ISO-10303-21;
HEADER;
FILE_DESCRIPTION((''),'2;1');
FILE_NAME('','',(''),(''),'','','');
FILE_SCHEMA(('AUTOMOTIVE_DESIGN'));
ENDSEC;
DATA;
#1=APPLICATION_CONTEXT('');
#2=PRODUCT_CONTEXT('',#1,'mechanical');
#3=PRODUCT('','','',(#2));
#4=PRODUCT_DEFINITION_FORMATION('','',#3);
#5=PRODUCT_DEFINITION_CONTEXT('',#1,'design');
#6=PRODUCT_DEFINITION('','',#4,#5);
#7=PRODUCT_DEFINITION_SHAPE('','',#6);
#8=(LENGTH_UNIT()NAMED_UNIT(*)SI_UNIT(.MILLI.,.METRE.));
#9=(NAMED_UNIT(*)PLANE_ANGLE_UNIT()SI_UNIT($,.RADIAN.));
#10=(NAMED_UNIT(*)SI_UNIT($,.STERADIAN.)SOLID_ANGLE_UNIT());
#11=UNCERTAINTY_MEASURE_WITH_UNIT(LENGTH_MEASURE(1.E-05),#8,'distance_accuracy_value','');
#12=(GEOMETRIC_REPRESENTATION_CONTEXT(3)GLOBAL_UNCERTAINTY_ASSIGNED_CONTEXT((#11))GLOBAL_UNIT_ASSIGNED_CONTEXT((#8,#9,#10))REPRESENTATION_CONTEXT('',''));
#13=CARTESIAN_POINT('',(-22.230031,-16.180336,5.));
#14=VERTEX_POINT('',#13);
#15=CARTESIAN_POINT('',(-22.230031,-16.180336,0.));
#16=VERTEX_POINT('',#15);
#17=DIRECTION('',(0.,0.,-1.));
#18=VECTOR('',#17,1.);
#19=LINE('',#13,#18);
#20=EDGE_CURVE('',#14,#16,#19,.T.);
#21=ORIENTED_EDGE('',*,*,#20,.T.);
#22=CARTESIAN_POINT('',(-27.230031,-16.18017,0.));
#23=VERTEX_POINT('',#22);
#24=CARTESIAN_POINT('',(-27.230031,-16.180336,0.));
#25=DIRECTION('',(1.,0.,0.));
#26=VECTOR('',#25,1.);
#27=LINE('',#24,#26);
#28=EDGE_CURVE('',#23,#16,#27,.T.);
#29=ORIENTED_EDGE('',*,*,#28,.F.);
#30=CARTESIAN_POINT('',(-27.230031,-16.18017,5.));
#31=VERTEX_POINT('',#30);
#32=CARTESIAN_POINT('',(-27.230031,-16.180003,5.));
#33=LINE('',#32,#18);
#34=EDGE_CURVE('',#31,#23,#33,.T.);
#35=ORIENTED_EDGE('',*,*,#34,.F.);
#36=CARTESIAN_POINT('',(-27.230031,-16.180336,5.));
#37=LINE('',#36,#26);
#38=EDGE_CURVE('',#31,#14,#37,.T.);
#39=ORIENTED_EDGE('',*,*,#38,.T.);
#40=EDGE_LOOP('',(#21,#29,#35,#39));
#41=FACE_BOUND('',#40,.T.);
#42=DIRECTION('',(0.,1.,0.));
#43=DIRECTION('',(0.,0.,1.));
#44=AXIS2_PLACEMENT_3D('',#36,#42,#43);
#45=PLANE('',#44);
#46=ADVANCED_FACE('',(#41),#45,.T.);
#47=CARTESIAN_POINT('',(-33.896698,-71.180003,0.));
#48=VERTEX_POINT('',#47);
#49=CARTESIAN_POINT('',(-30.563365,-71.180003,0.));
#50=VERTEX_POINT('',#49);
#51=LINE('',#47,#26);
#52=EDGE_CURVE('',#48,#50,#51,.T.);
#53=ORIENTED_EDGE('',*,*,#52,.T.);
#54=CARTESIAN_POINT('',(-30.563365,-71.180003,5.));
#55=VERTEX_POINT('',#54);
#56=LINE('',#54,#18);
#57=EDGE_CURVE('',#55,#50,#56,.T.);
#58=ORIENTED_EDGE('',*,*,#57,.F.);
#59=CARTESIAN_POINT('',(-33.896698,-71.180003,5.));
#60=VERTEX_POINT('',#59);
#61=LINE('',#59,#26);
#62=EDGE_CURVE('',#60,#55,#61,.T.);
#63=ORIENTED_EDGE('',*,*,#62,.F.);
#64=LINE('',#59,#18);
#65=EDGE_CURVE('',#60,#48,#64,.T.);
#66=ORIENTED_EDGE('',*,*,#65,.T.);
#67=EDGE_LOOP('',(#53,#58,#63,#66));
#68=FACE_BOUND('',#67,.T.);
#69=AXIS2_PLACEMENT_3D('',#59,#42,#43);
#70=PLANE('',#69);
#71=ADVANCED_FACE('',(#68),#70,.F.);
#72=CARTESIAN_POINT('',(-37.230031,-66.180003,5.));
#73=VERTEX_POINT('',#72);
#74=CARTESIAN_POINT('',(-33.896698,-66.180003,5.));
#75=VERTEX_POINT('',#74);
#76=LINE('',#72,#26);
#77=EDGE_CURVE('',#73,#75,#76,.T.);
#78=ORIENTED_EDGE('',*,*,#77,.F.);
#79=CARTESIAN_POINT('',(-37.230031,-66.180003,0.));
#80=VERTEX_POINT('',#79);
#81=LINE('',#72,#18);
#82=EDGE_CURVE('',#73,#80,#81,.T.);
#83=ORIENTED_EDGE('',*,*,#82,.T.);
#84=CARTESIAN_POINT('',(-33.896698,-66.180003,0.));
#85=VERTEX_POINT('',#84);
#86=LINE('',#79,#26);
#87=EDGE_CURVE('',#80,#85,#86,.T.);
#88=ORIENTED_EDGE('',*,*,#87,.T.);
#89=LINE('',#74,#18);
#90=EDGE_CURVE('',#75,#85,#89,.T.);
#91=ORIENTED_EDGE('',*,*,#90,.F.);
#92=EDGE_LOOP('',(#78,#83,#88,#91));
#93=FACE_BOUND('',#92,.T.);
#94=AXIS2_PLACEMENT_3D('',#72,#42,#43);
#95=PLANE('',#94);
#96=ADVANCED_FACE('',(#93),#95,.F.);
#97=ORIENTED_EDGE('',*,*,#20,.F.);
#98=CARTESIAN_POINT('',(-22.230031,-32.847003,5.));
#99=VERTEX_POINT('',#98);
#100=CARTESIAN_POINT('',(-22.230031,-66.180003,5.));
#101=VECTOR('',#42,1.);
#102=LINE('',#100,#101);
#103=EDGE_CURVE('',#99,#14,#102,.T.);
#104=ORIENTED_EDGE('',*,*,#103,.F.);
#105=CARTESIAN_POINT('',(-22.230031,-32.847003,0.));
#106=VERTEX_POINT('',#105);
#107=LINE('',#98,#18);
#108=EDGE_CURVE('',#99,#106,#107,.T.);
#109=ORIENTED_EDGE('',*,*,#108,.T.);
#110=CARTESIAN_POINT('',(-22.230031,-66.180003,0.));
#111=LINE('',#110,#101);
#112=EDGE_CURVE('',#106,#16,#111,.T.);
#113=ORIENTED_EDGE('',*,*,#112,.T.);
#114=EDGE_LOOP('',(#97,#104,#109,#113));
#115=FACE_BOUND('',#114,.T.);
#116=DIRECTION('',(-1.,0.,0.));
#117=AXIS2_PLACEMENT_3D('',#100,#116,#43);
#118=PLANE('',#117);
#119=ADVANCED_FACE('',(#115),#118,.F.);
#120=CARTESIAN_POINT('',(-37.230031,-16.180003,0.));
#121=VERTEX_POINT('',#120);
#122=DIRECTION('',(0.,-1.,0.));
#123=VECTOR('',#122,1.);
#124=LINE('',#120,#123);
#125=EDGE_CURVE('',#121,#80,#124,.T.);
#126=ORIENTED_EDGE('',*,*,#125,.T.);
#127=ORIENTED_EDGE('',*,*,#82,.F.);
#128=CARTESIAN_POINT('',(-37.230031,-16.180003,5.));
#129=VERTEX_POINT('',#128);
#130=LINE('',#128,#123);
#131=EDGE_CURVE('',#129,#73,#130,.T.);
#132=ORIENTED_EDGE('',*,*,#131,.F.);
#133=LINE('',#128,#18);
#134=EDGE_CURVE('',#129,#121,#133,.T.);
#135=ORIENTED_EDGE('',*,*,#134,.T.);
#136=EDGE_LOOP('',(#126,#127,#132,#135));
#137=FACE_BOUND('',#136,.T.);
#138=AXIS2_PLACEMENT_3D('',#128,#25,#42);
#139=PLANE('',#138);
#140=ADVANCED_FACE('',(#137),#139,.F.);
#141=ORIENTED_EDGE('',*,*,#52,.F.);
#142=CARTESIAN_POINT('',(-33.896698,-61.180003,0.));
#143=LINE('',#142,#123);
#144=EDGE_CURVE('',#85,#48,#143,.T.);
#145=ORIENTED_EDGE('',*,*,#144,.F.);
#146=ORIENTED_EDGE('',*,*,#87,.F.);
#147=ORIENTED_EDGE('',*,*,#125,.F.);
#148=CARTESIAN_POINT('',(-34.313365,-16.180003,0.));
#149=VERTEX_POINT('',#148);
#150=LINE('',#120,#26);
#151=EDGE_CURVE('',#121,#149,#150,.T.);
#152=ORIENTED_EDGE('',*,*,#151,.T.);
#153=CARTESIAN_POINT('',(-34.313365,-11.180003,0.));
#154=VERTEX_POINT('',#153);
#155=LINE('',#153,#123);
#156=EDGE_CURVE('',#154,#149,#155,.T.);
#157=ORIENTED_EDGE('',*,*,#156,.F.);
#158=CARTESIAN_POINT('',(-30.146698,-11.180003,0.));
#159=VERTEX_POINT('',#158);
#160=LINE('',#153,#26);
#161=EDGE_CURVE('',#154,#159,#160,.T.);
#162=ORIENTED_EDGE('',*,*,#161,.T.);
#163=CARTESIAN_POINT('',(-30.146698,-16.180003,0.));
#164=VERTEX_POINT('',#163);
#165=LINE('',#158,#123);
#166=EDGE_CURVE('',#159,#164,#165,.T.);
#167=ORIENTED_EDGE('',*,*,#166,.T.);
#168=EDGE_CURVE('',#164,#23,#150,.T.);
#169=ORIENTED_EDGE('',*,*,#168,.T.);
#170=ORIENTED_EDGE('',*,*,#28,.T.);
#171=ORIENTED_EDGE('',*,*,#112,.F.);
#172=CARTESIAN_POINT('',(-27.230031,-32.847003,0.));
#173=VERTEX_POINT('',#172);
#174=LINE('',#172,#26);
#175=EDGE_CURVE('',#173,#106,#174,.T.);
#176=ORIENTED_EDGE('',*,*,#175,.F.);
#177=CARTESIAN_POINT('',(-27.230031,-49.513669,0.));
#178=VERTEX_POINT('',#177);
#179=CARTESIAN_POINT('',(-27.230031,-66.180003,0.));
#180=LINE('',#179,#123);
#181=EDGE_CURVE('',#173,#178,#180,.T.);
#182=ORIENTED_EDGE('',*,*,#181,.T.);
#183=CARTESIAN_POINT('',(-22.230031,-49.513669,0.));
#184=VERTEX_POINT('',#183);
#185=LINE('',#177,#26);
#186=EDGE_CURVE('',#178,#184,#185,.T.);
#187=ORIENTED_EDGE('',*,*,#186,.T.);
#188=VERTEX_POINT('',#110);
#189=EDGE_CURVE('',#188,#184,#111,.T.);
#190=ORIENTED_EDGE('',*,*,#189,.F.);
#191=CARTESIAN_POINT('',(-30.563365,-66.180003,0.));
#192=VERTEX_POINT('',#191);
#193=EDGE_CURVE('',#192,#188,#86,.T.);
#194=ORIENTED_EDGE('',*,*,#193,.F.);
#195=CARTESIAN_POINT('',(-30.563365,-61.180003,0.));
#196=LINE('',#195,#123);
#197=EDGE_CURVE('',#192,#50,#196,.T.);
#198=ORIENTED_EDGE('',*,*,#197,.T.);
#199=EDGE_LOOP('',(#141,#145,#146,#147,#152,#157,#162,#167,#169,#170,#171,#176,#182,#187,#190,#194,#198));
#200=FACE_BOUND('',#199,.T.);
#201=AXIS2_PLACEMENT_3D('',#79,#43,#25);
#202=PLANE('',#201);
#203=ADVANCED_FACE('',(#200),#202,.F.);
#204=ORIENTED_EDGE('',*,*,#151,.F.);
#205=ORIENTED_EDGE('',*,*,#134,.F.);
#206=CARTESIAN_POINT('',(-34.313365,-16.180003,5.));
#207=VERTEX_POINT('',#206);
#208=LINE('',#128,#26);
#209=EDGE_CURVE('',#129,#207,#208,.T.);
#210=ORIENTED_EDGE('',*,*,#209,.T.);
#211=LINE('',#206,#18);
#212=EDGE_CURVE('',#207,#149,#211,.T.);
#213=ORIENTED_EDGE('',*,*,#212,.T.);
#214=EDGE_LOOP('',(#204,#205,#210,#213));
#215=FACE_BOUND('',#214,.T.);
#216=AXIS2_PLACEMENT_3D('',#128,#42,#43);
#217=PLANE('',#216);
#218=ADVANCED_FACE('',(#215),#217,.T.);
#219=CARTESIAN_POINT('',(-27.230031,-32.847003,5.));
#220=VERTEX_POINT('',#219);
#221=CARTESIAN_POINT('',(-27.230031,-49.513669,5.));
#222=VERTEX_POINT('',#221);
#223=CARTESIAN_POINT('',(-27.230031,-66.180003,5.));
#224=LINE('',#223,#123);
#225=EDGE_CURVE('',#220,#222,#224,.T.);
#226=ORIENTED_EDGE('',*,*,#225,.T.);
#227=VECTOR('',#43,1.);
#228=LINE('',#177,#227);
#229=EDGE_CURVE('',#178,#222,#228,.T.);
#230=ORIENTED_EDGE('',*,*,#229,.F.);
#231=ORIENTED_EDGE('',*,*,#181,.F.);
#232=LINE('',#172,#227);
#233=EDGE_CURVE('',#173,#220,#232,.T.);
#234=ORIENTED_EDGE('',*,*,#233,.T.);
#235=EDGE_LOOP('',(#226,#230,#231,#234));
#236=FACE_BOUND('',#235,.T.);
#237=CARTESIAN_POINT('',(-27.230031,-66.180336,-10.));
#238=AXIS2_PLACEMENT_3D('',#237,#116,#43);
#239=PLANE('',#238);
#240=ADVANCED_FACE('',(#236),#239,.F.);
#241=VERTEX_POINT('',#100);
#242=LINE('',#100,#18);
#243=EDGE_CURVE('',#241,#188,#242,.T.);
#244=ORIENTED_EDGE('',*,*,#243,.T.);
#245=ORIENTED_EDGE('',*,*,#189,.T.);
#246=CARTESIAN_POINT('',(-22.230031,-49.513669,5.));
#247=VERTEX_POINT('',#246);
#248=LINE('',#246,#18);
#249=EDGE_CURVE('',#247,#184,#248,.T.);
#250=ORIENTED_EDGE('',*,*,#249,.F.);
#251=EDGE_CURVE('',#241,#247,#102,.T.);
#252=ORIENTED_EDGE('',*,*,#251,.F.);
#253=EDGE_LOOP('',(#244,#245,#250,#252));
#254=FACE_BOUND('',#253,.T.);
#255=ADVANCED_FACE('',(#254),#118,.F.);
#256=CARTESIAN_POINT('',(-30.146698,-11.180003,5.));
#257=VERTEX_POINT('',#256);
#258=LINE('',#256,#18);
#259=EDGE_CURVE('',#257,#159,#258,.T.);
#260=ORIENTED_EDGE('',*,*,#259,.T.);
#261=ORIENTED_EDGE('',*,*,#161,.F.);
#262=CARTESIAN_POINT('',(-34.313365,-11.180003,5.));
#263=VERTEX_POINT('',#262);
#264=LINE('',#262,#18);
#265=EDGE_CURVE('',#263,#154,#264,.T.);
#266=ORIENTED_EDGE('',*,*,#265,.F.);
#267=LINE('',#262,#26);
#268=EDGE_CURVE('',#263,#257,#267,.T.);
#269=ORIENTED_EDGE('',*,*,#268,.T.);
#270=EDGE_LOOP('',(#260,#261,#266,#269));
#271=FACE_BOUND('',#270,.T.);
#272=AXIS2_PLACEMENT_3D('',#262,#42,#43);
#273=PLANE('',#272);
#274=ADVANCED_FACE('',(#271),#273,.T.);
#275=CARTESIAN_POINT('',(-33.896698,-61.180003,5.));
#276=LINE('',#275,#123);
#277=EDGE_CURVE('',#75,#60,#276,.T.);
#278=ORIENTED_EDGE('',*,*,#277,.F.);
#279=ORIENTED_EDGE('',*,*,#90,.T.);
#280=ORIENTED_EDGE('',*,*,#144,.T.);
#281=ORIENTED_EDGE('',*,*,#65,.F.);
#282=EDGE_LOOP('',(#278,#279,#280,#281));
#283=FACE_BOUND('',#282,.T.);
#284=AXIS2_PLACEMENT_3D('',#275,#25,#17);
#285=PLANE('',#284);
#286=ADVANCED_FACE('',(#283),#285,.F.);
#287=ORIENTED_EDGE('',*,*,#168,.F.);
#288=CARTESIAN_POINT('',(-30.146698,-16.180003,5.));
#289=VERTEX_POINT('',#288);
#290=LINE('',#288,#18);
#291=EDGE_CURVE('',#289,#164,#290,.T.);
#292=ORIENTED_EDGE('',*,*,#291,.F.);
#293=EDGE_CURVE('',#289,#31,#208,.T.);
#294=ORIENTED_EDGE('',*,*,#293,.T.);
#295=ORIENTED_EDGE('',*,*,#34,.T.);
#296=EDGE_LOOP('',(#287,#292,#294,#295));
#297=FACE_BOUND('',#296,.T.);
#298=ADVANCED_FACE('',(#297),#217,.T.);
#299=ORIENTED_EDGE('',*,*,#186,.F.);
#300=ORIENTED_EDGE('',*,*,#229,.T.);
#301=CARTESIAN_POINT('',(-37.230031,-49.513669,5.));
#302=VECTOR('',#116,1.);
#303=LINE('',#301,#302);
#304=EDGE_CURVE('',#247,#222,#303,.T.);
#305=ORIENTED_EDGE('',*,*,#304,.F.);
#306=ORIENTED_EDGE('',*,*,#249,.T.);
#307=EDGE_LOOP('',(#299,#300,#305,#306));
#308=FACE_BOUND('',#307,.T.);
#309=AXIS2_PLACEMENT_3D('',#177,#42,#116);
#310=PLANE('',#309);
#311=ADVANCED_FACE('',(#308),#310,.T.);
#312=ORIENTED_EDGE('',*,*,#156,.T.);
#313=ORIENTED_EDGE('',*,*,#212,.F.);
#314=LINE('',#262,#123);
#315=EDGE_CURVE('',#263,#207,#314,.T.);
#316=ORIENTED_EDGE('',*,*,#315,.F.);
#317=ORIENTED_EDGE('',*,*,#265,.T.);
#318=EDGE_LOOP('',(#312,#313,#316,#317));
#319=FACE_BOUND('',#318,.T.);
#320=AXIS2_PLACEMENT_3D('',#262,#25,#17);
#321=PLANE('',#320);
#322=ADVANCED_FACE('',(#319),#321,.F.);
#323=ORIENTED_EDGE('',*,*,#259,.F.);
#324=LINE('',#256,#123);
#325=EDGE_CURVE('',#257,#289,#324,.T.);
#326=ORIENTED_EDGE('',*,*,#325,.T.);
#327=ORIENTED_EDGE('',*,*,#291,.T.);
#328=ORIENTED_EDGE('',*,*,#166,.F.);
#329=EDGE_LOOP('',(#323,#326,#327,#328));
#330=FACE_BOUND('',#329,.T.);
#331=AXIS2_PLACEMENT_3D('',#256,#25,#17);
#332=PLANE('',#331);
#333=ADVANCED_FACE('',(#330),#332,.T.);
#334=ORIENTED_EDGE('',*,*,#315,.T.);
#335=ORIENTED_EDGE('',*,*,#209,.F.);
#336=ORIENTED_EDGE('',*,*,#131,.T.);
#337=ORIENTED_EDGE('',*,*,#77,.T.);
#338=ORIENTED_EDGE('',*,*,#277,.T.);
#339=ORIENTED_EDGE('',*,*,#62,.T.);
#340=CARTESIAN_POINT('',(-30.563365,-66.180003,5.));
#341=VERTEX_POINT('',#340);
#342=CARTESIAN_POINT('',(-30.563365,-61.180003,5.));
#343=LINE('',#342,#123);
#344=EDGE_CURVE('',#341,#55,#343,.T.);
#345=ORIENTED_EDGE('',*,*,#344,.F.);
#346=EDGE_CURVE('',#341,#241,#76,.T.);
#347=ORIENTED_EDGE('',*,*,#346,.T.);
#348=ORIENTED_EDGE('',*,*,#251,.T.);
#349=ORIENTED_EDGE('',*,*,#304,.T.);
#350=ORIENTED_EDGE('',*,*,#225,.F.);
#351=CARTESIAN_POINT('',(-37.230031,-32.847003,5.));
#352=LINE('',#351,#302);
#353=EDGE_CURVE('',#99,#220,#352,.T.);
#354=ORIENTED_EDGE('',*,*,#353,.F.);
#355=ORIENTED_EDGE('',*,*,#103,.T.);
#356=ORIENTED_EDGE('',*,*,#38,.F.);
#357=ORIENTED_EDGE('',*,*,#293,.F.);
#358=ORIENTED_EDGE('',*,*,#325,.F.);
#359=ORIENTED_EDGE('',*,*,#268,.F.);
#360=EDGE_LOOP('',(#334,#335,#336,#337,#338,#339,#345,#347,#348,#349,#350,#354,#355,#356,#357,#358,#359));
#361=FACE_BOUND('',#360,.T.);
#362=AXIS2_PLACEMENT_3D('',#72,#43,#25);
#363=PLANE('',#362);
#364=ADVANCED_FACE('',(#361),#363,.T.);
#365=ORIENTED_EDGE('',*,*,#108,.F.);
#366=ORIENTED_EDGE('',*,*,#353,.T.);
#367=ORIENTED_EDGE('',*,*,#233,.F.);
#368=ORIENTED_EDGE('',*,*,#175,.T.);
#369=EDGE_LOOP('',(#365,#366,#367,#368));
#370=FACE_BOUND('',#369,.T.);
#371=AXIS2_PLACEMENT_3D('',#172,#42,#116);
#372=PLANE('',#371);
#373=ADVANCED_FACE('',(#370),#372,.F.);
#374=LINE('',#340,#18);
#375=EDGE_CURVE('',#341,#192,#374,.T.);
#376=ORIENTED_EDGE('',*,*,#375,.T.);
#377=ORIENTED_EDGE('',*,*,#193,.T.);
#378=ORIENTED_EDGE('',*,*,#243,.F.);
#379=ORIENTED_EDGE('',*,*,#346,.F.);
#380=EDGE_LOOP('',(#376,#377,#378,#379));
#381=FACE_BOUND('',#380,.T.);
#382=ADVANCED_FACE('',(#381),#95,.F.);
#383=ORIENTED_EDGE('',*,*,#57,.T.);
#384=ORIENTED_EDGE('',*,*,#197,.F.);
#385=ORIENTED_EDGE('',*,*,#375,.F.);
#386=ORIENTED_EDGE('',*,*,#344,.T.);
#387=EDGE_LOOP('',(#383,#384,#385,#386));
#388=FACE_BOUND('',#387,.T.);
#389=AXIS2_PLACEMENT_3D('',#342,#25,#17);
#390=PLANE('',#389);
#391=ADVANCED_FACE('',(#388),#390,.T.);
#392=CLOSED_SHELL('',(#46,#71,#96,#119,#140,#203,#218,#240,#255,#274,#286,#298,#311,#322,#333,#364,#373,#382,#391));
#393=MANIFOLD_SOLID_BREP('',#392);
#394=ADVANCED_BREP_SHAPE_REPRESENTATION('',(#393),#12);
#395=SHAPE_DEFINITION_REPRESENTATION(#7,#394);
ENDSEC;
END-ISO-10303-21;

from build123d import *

# Parameters (mm, degrees)
SKETCH1_W           = 4.166666667
SKETCH1_H           = 5
SKETCH1_W_2         = 3.333333333
BOSS_EXTRUDE1_DEPTH = 5
CAVITY1_START       = -27.230031218
CAVITY1_OUTLINE_W   = 16.666666667
CAVITY1_OUTLINE_H   = 5
CAVITY1_DEPTH       = 5


# Read off the part's stored shape, not the designer's step: Cavity1
with BuildPart() as part:
    # Sketch1 → Boss-Extrude1 (new body)
    with BuildSketch(Plane.XY):
        with Locations((-32.230031219, -13.680003411)):
            Rectangle(SKETCH1_W, SKETCH1_H)
        Polygon((-34.313364552, -21.180003411), (-34.313364552, -16.180003411), (-37.230031218, -16.180003411), (-37.230031218, -66.180003411), (-33.896697885, -66.180003411), (-33.896697885, -61.180003411), (-30.563364552, -61.180003411), (-30.563364552, -66.180003411), (-27.230031218, -66.180003411), (-27.230031218, -16.180003411), (-30.146697885, -16.180003411), (-30.146697885, -21.180003411), align=None)
        with Locations((-32.230031219, -18.680003411)):
            Rectangle(SKETCH1_W, SKETCH1_H)
        Polygon((-22.230031218, -16.180335931), (-27.230031218, -16.180003411), (-27.230031218, -66.180003411), (-22.230031218, -66.180003411), align=None)
        with Locations((-32.230031219, -63.680003411)):
            Rectangle(SKETCH1_W_2, SKETCH1_H)
        with Locations((-32.230031219, -68.680003411)):
            Rectangle(SKETCH1_W_2, SKETCH1_H)
    extrude(amount=BOSS_EXTRUDE1_DEPTH)

    # Cavity1 outline → Cavity1 (cut)
    with BuildSketch(Plane.YZ.offset(CAVITY1_START)):
        with Locations((-41.180335932, 2.5)):
            Rectangle(CAVITY1_OUTLINE_W, CAVITY1_OUTLINE_H)
    extrude(amount=CAVITY1_DEPTH, mode=Mode.SUBTRACT)


solid = part.part
